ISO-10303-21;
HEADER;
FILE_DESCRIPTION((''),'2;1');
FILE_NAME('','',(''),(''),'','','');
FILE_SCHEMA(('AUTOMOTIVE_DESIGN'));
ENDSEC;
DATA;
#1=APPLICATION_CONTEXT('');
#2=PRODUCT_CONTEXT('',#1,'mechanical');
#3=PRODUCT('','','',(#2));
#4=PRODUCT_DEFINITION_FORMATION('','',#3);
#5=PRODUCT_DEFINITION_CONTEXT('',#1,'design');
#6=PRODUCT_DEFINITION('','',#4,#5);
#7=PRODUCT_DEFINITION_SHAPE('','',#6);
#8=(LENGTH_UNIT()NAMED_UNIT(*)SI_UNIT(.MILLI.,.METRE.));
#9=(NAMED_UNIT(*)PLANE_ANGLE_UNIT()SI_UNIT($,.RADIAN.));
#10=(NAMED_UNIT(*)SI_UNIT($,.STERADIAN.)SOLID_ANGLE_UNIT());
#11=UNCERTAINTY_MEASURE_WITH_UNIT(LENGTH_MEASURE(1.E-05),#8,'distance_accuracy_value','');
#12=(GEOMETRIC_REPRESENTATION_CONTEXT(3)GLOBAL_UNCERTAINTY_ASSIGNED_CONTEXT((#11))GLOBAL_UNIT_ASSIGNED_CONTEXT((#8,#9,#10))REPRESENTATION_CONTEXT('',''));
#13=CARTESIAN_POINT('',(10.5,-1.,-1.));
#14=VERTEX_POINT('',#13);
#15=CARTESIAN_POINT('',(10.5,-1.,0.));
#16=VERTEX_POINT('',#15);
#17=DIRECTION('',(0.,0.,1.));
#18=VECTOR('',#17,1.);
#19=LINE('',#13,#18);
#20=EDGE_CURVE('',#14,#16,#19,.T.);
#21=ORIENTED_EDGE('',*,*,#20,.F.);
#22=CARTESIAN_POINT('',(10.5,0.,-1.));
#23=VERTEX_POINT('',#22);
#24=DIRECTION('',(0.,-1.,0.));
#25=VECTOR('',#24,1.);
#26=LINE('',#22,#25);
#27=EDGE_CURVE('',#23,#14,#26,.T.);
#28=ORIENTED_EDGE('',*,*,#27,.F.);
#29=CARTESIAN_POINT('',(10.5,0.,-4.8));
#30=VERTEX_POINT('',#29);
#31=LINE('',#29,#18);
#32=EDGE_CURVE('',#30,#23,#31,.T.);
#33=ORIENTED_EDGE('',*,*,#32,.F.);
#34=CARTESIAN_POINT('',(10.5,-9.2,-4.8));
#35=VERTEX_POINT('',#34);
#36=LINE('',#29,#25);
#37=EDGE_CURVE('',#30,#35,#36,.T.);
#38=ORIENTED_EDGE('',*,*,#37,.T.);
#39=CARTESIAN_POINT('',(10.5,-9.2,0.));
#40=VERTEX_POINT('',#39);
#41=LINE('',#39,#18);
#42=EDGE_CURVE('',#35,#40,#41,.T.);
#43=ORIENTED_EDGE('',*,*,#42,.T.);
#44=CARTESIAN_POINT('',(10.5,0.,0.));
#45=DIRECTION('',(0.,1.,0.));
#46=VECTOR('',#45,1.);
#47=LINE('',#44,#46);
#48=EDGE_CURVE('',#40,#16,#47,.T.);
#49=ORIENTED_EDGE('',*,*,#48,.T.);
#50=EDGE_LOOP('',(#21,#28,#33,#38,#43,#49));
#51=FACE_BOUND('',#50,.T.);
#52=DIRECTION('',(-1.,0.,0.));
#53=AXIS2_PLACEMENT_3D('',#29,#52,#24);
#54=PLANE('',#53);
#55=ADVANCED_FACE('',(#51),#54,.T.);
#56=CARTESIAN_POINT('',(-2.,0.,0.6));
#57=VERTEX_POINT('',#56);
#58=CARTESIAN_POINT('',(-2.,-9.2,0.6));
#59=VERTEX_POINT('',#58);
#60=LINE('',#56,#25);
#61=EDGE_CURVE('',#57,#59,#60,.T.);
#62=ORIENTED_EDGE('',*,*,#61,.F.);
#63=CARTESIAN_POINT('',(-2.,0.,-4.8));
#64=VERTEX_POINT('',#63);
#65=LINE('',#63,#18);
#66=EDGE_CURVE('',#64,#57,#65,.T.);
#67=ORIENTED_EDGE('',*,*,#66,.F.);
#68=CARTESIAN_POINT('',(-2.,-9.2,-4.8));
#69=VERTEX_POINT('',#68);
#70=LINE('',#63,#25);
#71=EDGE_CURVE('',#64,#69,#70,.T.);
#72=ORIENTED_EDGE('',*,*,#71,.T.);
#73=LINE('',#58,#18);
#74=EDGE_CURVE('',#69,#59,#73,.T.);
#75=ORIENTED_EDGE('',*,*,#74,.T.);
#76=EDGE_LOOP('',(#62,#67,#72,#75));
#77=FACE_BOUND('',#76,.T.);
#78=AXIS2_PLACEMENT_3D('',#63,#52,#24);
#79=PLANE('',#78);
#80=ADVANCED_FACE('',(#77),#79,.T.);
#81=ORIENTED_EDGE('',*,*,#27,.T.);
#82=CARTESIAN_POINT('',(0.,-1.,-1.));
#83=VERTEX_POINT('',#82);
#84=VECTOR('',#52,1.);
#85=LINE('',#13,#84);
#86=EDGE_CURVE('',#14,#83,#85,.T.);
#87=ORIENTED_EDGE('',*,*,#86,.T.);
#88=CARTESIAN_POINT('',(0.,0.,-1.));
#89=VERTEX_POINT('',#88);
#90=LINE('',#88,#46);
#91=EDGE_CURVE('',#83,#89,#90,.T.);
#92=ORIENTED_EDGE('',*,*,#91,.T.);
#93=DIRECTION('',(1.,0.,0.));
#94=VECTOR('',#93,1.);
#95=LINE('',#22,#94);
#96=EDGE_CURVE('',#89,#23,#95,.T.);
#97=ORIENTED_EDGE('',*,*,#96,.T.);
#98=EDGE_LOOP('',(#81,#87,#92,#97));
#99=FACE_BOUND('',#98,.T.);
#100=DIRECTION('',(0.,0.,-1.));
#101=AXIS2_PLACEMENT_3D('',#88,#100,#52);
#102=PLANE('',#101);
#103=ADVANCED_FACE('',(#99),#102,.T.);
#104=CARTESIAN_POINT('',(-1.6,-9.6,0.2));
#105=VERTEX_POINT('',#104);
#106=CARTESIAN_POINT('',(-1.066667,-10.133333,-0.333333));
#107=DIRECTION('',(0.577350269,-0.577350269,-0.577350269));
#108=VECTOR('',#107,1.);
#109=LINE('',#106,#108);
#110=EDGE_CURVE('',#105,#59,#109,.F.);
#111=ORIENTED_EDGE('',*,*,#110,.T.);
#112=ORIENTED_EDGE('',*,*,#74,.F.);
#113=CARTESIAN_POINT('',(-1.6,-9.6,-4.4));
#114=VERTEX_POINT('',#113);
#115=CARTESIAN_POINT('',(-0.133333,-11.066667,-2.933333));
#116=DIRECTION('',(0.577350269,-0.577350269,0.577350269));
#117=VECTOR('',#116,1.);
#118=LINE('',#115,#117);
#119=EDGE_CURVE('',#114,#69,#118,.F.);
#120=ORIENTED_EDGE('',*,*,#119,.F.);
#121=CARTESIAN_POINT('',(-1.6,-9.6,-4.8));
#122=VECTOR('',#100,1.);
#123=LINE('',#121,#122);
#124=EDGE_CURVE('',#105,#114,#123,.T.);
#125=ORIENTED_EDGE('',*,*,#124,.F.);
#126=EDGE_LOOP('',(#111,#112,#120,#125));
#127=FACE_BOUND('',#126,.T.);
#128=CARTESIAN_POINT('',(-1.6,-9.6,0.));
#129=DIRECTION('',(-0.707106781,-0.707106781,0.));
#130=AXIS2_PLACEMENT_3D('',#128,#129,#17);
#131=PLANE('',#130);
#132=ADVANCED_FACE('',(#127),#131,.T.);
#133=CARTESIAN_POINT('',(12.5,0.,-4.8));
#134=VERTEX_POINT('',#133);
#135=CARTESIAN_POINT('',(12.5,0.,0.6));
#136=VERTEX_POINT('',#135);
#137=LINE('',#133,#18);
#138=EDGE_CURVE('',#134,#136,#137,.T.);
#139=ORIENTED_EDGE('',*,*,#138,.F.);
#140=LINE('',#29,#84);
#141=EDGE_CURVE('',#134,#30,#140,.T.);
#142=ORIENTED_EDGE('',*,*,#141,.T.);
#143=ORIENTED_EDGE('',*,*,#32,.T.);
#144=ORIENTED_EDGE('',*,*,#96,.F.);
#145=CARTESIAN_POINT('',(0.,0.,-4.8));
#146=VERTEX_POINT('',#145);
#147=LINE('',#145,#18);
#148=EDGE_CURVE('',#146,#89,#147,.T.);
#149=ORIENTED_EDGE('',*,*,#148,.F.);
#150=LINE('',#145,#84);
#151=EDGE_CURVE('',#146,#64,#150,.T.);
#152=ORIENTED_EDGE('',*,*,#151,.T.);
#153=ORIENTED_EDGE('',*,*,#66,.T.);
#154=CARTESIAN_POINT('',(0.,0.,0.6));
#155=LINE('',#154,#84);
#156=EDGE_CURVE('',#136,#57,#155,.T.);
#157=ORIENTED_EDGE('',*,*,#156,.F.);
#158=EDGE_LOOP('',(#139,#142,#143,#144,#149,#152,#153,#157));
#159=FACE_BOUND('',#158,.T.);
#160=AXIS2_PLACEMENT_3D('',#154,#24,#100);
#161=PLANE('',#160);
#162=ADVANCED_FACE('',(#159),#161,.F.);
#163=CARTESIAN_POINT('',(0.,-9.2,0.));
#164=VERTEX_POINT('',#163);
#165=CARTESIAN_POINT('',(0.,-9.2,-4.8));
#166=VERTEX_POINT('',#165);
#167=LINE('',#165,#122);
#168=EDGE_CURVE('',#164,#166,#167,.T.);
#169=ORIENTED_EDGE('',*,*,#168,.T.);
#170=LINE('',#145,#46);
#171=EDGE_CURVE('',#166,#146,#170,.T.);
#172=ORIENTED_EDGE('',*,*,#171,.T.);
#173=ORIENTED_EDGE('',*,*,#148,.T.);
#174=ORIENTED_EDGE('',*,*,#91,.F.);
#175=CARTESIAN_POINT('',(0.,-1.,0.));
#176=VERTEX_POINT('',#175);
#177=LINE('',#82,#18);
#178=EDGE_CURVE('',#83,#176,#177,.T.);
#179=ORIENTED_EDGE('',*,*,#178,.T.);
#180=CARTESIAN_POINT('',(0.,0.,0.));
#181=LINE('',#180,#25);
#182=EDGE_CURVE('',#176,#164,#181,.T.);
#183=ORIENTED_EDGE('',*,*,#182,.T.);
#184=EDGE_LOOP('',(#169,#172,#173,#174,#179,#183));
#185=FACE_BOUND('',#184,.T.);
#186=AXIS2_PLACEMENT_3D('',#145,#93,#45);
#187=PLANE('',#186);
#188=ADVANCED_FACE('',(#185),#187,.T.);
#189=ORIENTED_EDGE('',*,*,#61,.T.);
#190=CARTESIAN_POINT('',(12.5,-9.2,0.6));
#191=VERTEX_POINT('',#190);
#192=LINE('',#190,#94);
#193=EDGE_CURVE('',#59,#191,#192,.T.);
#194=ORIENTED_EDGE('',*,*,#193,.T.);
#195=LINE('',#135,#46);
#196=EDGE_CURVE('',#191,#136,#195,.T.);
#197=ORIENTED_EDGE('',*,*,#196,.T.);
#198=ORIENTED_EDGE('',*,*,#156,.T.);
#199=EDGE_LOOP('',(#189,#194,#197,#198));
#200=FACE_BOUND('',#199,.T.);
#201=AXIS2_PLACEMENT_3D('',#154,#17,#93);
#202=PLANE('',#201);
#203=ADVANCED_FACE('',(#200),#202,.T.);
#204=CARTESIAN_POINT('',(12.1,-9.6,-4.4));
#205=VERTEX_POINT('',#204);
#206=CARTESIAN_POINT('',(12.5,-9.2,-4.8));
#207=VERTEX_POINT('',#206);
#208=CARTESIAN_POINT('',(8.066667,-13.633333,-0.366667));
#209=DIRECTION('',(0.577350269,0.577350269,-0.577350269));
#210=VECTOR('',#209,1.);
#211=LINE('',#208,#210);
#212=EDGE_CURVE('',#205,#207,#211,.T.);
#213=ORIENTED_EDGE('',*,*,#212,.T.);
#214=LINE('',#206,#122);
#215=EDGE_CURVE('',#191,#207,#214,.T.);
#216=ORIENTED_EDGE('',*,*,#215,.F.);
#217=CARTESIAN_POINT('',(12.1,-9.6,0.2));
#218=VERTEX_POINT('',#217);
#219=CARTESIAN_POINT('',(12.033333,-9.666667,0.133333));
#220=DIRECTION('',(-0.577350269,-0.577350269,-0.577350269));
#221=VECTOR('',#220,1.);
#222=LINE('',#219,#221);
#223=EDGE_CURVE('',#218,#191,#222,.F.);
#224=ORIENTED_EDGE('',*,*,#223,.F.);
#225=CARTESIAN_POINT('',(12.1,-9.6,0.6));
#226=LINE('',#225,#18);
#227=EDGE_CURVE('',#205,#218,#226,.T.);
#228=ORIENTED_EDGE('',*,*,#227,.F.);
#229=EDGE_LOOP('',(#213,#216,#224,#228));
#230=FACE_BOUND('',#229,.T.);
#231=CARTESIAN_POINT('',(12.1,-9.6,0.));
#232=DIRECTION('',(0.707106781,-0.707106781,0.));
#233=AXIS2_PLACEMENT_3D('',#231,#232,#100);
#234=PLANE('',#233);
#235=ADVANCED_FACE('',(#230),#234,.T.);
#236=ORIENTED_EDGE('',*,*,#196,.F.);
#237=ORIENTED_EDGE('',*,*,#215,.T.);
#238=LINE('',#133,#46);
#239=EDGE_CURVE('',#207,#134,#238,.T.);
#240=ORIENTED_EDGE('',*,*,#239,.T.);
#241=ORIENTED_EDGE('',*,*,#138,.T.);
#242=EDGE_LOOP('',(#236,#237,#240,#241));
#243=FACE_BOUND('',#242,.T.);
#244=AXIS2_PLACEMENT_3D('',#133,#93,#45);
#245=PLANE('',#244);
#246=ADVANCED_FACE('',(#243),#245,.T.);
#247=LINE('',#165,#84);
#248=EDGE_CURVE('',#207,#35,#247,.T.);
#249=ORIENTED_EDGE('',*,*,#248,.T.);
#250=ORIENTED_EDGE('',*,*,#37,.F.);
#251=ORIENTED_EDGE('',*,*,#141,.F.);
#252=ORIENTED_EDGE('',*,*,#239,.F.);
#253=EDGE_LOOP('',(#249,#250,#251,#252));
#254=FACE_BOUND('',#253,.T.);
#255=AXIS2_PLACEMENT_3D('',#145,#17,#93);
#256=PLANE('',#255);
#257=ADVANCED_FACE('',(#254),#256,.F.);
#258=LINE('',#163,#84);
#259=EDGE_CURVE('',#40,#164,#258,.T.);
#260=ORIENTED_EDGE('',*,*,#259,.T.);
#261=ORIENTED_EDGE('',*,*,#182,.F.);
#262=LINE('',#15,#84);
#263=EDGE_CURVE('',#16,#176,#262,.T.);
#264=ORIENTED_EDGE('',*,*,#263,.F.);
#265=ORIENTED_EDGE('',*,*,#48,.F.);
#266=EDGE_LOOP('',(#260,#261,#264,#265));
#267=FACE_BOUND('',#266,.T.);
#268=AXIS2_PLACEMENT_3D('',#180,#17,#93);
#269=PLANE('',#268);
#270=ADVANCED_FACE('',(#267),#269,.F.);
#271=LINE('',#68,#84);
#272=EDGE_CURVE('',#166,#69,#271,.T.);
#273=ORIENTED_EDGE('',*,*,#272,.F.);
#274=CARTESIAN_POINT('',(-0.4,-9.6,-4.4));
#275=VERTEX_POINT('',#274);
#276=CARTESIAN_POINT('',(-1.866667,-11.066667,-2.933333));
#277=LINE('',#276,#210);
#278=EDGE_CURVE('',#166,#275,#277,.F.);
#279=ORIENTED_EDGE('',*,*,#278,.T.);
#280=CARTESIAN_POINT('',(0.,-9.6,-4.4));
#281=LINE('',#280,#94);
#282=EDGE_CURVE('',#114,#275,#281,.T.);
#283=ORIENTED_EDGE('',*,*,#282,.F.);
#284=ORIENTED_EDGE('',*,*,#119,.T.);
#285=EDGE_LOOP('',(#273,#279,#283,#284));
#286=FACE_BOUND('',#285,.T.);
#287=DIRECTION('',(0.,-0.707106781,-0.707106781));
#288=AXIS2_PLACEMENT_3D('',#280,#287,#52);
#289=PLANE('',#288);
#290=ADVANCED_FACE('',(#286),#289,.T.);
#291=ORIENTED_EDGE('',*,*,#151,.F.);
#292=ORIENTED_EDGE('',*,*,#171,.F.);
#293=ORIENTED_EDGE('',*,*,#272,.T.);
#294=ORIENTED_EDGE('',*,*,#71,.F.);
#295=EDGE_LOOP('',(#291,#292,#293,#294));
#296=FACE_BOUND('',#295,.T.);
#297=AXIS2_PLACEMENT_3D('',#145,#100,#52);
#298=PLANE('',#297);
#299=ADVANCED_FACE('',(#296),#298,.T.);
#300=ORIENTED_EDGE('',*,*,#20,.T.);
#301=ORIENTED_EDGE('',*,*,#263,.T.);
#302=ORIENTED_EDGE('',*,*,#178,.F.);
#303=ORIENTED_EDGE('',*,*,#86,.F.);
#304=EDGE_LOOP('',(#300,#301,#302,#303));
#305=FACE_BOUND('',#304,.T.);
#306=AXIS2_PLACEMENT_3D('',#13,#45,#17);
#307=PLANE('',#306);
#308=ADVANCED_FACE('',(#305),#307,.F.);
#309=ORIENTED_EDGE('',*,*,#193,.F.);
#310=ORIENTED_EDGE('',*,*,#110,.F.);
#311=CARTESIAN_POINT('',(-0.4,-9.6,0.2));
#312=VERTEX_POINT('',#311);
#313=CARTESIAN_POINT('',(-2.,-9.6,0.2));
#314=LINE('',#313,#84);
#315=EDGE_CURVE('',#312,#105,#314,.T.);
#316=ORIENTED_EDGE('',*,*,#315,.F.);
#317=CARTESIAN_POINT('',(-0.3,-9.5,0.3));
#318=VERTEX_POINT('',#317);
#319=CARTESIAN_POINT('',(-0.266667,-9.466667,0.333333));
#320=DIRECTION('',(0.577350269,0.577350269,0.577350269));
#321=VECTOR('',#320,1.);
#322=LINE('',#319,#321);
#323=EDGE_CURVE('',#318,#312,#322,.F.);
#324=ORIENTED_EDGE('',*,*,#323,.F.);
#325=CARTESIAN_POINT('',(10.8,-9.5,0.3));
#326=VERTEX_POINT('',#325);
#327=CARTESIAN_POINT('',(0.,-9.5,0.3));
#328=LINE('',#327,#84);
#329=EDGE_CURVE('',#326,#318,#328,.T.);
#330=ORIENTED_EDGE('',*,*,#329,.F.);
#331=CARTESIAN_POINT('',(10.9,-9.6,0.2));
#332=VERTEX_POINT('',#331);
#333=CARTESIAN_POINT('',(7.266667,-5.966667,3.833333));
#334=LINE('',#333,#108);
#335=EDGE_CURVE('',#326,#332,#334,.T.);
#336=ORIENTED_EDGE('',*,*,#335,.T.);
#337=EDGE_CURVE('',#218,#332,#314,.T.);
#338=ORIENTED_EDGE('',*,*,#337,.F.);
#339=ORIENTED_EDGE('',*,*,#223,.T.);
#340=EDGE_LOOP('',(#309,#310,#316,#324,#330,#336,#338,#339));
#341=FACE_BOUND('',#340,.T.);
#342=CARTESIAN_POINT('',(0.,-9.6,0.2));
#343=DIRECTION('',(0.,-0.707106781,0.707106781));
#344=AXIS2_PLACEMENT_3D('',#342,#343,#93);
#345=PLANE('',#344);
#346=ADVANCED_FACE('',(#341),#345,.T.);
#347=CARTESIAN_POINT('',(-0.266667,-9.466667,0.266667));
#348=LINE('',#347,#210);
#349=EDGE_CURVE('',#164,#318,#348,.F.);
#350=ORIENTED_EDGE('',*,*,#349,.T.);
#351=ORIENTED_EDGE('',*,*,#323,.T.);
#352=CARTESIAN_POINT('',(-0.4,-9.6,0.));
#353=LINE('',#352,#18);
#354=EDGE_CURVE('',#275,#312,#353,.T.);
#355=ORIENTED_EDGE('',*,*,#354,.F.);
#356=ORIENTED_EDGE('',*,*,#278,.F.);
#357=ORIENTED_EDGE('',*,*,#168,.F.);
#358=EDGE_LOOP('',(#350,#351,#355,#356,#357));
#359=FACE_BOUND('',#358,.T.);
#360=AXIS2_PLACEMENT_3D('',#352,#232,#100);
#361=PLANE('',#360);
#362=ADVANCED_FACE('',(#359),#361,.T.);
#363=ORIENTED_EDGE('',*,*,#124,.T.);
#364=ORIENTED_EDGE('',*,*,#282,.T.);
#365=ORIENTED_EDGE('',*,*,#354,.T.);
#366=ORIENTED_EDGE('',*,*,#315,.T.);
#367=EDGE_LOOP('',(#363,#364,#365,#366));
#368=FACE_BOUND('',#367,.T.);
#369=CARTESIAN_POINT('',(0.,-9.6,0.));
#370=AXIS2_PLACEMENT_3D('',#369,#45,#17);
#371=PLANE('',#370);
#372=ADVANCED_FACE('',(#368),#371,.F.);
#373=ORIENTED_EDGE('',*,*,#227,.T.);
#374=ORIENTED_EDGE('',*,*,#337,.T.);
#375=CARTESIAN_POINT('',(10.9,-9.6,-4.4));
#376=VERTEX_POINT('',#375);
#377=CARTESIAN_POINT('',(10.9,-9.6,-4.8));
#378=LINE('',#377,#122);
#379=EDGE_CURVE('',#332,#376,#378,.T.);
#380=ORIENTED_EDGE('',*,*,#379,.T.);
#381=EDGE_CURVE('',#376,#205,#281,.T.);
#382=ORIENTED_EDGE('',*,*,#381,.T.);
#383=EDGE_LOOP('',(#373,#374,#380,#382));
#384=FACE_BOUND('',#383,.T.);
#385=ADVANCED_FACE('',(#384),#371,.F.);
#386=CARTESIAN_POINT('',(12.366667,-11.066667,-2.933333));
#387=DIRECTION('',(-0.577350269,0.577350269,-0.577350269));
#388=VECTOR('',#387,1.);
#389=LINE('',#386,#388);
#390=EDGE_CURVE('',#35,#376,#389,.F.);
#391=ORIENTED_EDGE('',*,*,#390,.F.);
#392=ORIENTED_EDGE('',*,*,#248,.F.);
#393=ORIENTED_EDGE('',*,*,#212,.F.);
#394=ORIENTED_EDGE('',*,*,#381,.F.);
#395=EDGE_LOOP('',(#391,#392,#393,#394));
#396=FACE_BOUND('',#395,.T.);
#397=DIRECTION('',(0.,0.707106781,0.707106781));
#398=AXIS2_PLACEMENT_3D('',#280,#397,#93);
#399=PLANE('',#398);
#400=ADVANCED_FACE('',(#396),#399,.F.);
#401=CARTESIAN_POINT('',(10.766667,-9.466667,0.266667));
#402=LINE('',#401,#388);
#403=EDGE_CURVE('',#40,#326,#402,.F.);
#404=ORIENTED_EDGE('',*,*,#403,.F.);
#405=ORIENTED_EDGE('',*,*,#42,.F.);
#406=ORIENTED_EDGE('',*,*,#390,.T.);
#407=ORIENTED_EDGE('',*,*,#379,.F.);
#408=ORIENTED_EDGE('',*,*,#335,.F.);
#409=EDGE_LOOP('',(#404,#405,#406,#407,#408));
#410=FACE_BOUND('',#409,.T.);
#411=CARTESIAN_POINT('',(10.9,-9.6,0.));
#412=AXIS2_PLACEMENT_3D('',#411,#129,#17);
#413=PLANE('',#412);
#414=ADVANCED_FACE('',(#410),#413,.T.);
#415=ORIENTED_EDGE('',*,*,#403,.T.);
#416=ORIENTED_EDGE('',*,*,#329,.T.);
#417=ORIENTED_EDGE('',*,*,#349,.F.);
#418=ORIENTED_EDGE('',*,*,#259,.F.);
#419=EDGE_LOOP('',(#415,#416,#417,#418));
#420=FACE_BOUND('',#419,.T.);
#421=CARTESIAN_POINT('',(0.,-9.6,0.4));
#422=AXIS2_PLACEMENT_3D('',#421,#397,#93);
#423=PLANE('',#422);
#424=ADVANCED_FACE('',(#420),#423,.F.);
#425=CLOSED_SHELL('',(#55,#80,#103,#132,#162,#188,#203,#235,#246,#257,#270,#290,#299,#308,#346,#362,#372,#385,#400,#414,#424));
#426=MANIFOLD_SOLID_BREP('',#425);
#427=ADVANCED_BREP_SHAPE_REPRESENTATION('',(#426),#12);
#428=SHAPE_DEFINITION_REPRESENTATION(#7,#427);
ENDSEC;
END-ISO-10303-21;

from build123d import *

# Parameters (mm, degrees)
SKETCH_1_W      = 10.5
SKETCH_1_H      = 8.6
EXTRUDE_1_DEPTH = 0.6
SKETCH_2_W      = 2
SKETCH_2_H      = 8.6
EXTRUDE_2_DEPTH = 5.4
EXTRUDE_3_DEPTH = 1
SKETCH_4_W      = 10.5
SKETCH_4_H      = 1
EXTRUDE_4_DEPTH = 1
CHAMFER_1_SIZE  = 0.4


with BuildPart() as part:
    # Эскиз1 → Бобышка-Вытянуть1 (new body)
    with BuildSketch(Plane.XY):
        with Locations((5.25, -4.3)):
            Rectangle(SKETCH_1_W, SKETCH_1_H)
    extrude(amount=EXTRUDE_1_DEPTH)

    # Эскиз2 → Бобышка-Вытянуть2 (add)
    with BuildSketch(Plane.XY.offset(0.6)):
        with Locations((-1, -4.3)):
            Rectangle(SKETCH_2_W, SKETCH_2_H)
        with Locations((11.5, -4.3)):
            Rectangle(SKETCH_2_W, SKETCH_2_H)
    extrude(amount=-EXTRUDE_2_DEPTH)

    # Эскиз3 → Бобышка-Вытянуть3 (add)
    with BuildSketch(Plane.XZ.offset(8.6)):
        Polygon((10.5, 0), (10.5, -4.8), (12.5, -4.8), (12.5, 0.6), (-2, 0.6), (-2, -4.8), (0, -4.8), (0, 0), align=None)
    extrude(amount=EXTRUDE_3_DEPTH)

    # Эскиз4 → Бобышка-Вытянуть4 (add)
    with BuildSketch(Plane(origin=(0, 0, 0), x_dir=(-1, 0, 0), z_dir=(0, 0, -1))):
        with Locations((-5.25, -0.5)):
            Rectangle(SKETCH_4_W, SKETCH_4_H)
    extrude(amount=EXTRUDE_4_DEPTH)

    # Фаска1
    # the kernel refuses this chamfer: 0.4 mm, written as the material it takes off along each edge
    with BuildSketch(Plane(origin=(0, -9.6, -5.828673195), x_dir=(0.02749587661058617, 0.9996219169112966, 0), z_dir=(0, 0, 1)), Plane(origin=(10.5, -9.6, 0), x_dir=(-0.027495876610587302, 0.9996219169112966, 0), z_dir=(0, 0, -1))) as chamfer_1_piece_1:
        Polygon((CHAMFER_1_SIZE * 0.999621916911, CHAMFER_1_SIZE * 0.0274958766106), (-CHAMFER_1_SIZE * 0.0274958766106, CHAMFER_1_SIZE * 0.999621916911), (0, 0), align=None)
    extrude(amount=5.828673195, mode=Mode.SUBTRACT)
    with BuildSketch(Plane(origin=(0, -9.6, 0), x_dir=(0, 0.9996219169112968, -0.027495876610582035), z_dir=(1, 0, 0))) as chamfer_1_piece_2:
        Polygon((CHAMFER_1_SIZE * 0.999621916911, CHAMFER_1_SIZE * 0.0274958766106), (-CHAMFER_1_SIZE * 0.0274958766106, CHAMFER_1_SIZE * 0.999621916911), (0, 0), align=None)
    extrude(amount=10.5, mode=Mode.SUBTRACT)
    with BuildSketch(Plane(origin=(9.471326805, -9.6, -4.8), x_dir=(0, 0.9996219169112966, -0.027495876610587302), z_dir=(1, 0, 0)), Plane(origin=(-3.028673195, -9.6, -4.8), x_dir=(0, 0.9996219169112966, -0.027495876610587302), z_dir=(1, 0, 0))) as chamfer_1_piece_3:
        Polygon((CHAMFER_1_SIZE * 0.999621916911, CHAMFER_1_SIZE * 0.0274958766106), (-CHAMFER_1_SIZE * 0.0274958766106, CHAMFER_1_SIZE * 0.999621916911), (0, 0), align=None)
    extrude(amount=4.05734639, mode=Mode.SUBTRACT)
    with BuildSketch(Plane(origin=(12.5, -9.6, -5.828673195), x_dir=(0.027495876610587302, 0.9996219169112966, 0), z_dir=(0, 0, 1)), Plane(origin=(-2, -9.6, 1.628673195), x_dir=(-0.027495876610586223, 0.9996219169112966, 0), z_dir=(0, 0, -1))) as chamfer_1_piece_4:
        Polygon((CHAMFER_1_SIZE * 0.999621916911, CHAMFER_1_SIZE * 0.0274958766106), (-CHAMFER_1_SIZE * 0.0274958766106, CHAMFER_1_SIZE * 0.999621916911), (0, 0), align=None)
    extrude(amount=7.45734639, mode=Mode.SUBTRACT)
    with BuildSketch(Plane(origin=(13.528673195, -9.6, 0.6), x_dir=(0, 0.9996219169112968, 0.027495876610586226), z_dir=(-1, 0, 0))) as chamfer_1_piece_5:
        Polygon((CHAMFER_1_SIZE * 0.999621916911, CHAMFER_1_SIZE * 0.0274958766106), (-CHAMFER_1_SIZE * 0.0274958766106, CHAMFER_1_SIZE * 0.999621916911), (0, 0), align=None)
    extrude(amount=16.55734639, mode=Mode.SUBTRACT)
    with BuildSketch(Plane(origin=(0, -9.6, -5.828673195), x_dir=(0.02749587661058617, 0.9996219169112966, 0), z_dir=(0, 0, 1))) as chamfer_1_piece_6a_section:
        Polygon((CHAMFER_1_SIZE * 0.999621916911, CHAMFER_1_SIZE * 0.0274958766106), (-CHAMFER_1_SIZE * 0.0274958766106, CHAMFER_1_SIZE * 0.999621916911), (0, 0), align=None)
    chamfer_1_piece_6a = extrude(amount=6.85734639, mode=Mode.PRIVATE)
    chamfer_1_piece_6a = split(chamfer_1_piece_6a, bisect_by=Plane(origin=(-0.131917451, -9.468082549, 0), z_dir=(0, 0, 1)), keep=Keep.TOP, mode=Mode.PRIVATE)
    with BuildSketch(Plane(origin=(-1.028673195, -9.6, 0), x_dir=(0, 0.9996219169112968, -0.027495876610586317), z_dir=(1, 0, 0))) as chamfer_1_piece_6b_section:
        Polygon((CHAMFER_1_SIZE * 0.999621916911, CHAMFER_1_SIZE * 0.0274958766106), (-CHAMFER_1_SIZE * 0.0274958766106, CHAMFER_1_SIZE * 0.999621916911), (0, 0), align=None)
    chamfer_1_piece_6b = extrude(amount=11.528673195, mode=Mode.PRIVATE)
    chamfer_1_piece_6b = split(chamfer_1_piece_6b, bisect_by=Plane(origin=(0, -9.468082549, 0.131917451), z_dir=(-1, 0, 0)), keep=Keep.TOP, mode=Mode.PRIVATE)
    chamfer_1_piece_6 = chamfer_1_piece_6a & chamfer_1_piece_6b
    add(chamfer_1_piece_6, mode=Mode.SUBTRACT)
    with BuildSketch(Plane(origin=(10.5, -9.6, 1.028673195), x_dir=(-0.027495876610587302, 0.9996219169112966, 0), z_dir=(0, 0, -1))) as chamfer_1_piece_7a_section:
        Polygon((CHAMFER_1_SIZE * 0.999621916911, CHAMFER_1_SIZE * 0.0274958766106), (-CHAMFER_1_SIZE * 0.0274958766106, CHAMFER_1_SIZE * 0.999621916911), (0, 0), align=None)
    chamfer_1_piece_7a = extrude(amount=6.85734639, mode=Mode.PRIVATE)
    chamfer_1_piece_7a = split(chamfer_1_piece_7a, bisect_by=Plane(origin=(10.631917451, -9.468082549, 0), z_dir=(0, 0, 1)), keep=Keep.TOP, mode=Mode.PRIVATE)
    with BuildSketch(Plane(origin=(0, -9.6, 0), x_dir=(0, 0.9996219169112968, -0.027495876610582035), z_dir=(1, 0, 0))) as chamfer_1_piece_7b_section:
        Polygon((CHAMFER_1_SIZE * 0.999621916911, CHAMFER_1_SIZE * 0.0274958766106), (-CHAMFER_1_SIZE * 0.0274958766106, CHAMFER_1_SIZE * 0.999621916911), (0, 0), align=None)
    chamfer_1_piece_7b = extrude(amount=11.528673195, mode=Mode.PRIVATE)
    chamfer_1_piece_7b = split(chamfer_1_piece_7b, bisect_by=Plane(origin=(10.5, -9.468082549, 0.131917451), z_dir=(1, 0, 0)), keep=Keep.TOP, mode=Mode.PRIVATE)
    chamfer_1_piece_7 = chamfer_1_piece_7a & chamfer_1_piece_7b
    add(chamfer_1_piece_7, mode=Mode.SUBTRACT)


solid = part.part
